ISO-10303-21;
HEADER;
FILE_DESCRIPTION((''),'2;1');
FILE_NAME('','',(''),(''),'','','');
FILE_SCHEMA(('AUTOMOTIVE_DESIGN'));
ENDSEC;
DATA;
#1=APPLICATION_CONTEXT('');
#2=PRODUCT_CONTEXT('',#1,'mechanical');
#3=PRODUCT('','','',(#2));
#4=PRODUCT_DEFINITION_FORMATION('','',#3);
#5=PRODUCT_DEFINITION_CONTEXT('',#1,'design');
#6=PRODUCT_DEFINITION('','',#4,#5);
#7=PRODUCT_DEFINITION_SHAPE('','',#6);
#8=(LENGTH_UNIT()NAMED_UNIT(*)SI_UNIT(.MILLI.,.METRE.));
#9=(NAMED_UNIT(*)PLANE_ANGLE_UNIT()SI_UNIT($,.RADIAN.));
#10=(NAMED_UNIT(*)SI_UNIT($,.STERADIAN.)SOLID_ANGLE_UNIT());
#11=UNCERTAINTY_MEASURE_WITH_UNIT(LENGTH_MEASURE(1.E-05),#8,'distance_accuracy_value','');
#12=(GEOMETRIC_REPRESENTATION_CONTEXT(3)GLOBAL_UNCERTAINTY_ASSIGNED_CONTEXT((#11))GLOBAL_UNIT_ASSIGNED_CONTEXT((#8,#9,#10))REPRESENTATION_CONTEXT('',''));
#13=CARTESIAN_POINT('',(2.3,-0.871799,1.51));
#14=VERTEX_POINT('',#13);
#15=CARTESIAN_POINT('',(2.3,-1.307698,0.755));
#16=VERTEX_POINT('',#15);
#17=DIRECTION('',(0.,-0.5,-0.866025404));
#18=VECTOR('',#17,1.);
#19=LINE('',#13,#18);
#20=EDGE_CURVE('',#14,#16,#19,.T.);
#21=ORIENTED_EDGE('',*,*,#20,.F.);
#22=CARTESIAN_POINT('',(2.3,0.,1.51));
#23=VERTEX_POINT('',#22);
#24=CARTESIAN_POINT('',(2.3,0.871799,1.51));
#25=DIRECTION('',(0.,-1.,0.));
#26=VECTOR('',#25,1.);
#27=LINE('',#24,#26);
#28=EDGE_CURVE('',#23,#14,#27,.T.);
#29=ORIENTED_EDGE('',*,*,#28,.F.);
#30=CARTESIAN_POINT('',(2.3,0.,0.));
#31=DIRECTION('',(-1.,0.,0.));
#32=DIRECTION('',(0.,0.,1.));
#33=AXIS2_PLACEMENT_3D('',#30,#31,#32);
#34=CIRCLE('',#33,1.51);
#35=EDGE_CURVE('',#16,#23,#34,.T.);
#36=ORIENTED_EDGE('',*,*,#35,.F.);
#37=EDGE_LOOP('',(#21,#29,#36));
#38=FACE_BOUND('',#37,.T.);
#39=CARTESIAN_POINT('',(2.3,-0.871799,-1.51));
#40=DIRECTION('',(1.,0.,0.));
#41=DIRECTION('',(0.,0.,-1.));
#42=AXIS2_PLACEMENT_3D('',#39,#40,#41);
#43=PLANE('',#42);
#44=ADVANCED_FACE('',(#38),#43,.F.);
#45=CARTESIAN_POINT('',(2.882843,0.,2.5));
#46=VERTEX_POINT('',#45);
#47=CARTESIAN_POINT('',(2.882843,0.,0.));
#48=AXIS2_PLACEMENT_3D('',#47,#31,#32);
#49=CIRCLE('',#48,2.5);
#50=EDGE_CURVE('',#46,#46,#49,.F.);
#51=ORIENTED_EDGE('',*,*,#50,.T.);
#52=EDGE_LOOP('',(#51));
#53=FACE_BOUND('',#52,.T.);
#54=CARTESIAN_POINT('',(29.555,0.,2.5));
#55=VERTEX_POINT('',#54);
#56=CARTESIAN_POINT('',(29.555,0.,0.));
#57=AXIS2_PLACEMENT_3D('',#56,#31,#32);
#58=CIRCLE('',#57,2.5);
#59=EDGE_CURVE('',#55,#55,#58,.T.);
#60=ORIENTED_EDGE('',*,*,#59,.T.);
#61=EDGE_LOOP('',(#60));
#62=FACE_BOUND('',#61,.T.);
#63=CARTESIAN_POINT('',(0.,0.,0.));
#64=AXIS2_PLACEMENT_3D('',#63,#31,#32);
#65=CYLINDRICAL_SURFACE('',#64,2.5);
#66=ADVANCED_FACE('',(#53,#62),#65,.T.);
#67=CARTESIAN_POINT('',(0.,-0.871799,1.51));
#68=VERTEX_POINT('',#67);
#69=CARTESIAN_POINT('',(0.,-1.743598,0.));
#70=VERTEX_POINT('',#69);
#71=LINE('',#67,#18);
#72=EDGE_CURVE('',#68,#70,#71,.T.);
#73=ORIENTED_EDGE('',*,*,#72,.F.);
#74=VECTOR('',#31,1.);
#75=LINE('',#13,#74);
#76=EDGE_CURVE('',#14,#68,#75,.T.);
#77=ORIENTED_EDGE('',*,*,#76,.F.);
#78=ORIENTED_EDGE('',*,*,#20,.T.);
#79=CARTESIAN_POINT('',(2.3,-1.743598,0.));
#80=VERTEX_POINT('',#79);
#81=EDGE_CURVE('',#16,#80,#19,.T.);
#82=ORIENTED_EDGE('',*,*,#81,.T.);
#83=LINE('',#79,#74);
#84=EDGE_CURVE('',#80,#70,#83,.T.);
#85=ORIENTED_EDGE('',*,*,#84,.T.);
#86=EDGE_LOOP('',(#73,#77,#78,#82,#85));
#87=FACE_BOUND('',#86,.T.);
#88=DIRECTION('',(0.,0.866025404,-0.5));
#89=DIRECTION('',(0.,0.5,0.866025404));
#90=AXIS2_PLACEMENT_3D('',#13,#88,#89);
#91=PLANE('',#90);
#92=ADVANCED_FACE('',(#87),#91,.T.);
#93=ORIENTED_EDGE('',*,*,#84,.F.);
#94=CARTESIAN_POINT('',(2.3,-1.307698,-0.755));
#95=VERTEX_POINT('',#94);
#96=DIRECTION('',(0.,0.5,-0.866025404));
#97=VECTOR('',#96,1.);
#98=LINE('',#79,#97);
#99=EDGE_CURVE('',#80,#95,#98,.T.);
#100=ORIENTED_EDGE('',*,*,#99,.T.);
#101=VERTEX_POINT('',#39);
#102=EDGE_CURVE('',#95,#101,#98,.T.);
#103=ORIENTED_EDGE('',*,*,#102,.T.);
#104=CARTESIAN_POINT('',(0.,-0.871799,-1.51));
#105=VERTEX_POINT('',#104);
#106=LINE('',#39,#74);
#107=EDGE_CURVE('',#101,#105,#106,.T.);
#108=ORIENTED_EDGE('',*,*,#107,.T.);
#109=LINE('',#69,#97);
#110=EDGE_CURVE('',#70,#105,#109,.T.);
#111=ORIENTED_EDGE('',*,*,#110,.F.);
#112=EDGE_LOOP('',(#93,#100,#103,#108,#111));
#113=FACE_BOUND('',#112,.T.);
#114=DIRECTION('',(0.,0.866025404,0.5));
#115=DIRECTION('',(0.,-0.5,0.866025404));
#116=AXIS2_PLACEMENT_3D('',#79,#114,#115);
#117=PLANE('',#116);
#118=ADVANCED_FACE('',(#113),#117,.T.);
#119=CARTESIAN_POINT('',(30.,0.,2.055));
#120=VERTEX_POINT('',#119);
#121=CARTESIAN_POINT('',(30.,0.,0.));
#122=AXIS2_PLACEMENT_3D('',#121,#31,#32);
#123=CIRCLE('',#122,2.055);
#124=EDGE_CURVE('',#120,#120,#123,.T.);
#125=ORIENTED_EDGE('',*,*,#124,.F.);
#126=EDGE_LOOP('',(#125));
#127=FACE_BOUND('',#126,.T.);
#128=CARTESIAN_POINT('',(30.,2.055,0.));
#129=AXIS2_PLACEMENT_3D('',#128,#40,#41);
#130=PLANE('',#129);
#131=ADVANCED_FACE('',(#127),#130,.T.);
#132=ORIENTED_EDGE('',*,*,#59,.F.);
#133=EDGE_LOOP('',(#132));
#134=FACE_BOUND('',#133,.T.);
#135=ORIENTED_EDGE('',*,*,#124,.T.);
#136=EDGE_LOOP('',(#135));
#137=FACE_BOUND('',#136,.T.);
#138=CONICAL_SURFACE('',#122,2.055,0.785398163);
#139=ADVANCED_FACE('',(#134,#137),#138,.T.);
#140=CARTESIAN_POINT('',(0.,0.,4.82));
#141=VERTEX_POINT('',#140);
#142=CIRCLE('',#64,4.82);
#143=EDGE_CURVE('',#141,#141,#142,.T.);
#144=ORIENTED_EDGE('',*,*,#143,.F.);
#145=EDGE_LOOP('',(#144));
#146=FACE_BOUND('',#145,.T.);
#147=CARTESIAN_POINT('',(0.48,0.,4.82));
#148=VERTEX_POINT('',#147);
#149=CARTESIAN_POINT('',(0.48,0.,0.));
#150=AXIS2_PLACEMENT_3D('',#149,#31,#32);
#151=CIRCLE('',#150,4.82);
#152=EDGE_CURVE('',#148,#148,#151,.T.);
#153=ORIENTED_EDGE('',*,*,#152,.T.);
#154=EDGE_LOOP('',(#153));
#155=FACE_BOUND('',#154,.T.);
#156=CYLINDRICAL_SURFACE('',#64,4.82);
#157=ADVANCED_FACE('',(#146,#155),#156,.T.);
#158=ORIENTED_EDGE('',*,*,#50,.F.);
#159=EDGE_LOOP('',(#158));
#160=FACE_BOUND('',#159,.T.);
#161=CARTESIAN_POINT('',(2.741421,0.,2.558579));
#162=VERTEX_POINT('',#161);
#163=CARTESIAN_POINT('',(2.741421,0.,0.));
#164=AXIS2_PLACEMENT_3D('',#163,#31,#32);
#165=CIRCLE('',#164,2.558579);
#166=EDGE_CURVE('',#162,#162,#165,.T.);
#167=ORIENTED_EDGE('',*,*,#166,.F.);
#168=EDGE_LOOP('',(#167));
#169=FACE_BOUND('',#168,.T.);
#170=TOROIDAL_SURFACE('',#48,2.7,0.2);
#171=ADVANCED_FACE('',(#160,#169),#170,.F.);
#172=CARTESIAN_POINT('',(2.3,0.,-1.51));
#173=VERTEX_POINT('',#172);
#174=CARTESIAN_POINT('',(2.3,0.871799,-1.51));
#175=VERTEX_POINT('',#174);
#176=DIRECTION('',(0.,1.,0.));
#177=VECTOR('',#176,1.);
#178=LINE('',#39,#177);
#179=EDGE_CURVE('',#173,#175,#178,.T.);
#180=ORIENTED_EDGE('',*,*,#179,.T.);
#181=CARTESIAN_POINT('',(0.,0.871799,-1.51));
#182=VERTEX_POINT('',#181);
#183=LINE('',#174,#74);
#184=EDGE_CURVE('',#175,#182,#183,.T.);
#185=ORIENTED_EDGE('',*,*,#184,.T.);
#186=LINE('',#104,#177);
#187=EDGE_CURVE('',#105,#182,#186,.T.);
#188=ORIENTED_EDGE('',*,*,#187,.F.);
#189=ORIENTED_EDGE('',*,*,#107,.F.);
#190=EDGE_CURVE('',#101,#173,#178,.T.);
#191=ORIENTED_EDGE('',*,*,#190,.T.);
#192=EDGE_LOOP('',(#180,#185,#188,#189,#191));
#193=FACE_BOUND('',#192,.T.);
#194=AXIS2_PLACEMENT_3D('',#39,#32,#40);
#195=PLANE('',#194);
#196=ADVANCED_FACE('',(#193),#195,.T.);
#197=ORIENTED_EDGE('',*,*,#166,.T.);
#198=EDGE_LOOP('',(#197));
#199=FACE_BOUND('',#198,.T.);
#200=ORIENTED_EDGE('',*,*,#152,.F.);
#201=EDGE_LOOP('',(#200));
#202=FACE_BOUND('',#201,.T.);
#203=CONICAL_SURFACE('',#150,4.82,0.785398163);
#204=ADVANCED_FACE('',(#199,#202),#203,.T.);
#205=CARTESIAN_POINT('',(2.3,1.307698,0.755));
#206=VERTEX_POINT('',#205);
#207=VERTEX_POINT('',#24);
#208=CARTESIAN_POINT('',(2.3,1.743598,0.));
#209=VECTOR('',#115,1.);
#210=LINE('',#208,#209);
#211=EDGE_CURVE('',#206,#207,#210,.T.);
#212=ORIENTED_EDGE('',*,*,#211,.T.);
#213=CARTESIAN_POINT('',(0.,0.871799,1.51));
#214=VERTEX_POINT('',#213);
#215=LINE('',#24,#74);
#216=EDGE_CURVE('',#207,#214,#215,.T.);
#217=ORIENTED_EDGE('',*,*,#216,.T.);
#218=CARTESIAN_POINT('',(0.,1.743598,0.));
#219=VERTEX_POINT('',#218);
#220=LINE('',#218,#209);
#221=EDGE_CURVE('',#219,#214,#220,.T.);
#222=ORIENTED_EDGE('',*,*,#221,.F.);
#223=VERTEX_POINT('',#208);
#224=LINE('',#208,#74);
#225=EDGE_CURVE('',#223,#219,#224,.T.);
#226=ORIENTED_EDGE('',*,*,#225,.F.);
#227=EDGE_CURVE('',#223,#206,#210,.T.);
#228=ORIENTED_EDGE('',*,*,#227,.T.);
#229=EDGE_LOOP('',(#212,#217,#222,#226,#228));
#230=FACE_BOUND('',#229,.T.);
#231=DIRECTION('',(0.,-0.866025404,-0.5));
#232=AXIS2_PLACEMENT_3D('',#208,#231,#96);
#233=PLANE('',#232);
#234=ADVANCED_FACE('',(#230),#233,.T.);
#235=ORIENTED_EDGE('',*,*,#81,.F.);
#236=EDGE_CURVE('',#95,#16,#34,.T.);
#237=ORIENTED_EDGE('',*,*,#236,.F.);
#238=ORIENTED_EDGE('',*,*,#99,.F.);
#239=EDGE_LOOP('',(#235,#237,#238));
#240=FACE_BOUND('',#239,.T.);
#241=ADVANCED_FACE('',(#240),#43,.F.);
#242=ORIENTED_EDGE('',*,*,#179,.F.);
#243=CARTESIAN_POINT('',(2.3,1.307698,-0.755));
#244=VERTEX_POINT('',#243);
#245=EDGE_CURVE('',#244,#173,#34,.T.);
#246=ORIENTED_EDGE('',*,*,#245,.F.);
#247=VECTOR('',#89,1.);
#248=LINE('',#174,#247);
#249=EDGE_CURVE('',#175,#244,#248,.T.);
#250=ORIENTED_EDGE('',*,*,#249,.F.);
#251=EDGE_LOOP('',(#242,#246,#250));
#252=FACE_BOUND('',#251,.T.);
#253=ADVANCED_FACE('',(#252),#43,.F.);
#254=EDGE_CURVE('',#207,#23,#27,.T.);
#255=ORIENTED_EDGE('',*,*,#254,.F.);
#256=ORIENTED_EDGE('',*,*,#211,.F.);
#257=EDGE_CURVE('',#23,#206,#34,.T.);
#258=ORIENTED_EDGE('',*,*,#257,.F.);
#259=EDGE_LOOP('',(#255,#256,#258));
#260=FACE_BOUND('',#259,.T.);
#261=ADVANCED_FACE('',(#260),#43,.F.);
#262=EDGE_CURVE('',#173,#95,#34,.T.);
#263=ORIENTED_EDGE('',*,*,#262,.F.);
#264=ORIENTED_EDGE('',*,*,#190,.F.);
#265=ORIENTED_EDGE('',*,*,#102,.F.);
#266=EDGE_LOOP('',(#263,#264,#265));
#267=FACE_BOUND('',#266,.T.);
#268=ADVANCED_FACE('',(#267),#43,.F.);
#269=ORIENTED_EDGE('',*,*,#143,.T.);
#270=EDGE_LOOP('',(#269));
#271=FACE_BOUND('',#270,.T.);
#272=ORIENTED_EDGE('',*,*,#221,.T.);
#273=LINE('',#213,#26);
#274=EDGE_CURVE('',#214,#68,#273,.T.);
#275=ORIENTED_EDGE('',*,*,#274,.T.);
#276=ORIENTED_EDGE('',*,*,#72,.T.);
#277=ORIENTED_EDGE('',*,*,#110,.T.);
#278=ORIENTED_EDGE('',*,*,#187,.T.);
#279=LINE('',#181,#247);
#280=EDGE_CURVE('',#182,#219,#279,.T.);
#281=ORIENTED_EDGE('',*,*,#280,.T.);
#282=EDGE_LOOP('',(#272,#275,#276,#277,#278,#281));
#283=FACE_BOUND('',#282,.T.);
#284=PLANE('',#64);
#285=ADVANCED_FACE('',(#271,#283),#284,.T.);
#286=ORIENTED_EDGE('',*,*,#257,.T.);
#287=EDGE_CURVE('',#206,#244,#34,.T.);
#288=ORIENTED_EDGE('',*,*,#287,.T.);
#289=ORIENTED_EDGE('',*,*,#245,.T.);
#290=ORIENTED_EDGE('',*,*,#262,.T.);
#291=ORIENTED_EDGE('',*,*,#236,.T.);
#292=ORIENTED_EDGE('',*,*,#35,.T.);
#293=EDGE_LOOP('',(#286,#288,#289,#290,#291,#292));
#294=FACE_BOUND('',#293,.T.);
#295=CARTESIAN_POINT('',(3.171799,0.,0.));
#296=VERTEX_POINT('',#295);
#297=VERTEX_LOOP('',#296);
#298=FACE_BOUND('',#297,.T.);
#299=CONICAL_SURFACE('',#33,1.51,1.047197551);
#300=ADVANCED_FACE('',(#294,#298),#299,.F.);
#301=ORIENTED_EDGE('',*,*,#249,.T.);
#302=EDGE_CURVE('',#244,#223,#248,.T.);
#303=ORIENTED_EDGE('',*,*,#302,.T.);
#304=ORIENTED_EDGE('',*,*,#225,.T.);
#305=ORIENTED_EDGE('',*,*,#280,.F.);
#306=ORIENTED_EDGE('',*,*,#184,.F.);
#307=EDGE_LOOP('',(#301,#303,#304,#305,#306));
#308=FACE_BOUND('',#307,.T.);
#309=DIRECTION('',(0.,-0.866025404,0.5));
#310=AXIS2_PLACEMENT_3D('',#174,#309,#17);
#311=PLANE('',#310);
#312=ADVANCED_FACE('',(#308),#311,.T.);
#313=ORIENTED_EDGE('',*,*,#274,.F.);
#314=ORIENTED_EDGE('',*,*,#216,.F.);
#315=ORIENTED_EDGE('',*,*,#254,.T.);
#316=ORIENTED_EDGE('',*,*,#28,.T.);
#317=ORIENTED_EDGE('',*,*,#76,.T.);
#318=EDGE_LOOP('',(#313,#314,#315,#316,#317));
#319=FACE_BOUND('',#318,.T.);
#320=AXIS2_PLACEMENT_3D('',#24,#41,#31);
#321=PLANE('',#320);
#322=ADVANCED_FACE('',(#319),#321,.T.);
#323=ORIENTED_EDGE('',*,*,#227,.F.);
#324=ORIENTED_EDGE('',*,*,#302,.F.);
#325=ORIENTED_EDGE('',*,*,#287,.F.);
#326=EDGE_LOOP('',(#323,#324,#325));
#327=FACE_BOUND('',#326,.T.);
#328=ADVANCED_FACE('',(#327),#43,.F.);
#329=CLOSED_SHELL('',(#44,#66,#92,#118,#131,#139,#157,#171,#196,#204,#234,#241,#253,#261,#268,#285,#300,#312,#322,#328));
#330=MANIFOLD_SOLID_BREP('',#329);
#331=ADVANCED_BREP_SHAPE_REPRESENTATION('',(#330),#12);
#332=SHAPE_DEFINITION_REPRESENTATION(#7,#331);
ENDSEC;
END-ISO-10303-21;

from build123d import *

# Parameters (mm, degrees)
FILLET1_R   = 0.2
HEX_START   = -2.3
HEX_2_DEPTH = 2.3


with BuildPart() as part:
    # BodySke → BaseBody (revolve)
    with BuildSketch(Plane.XY, mode=Mode.PRIVATE) as basebody_sk:
        Polygon((0, 0), (0, 4.82), (0.48, 4.82), (2.8, 2.5), (29.555, 2.5), (30, 2.055), (30, 0), align=None)
    revolve(basebody_sk.sketch.rotate(Axis((0, 0, 0), (1, 0, 0)), 90), axis=Axis((0, 0, 0), (1, 0, 0)))

    # Fillet1
    fillet1_edges = [part.edges().sort_by_distance(p)[0] for p in [
        (2.8, 0, -2.5),
    ]]
    fillet(fillet1_edges, radius=FILLET1_R)

    # Hex 2: read off the stored shape, not the designer's step
    # Hex 2 outline → Hex 2 (cut)
    with BuildSketch(Plane.ZY.offset(HEX_START)):
        Polygon((-1.51, -0.871798906), (0, -1.743597813), (1.51, -0.871798906), (1.51, 0.871798906), (0, 1.743597813), (-1.51, 0.871798906), align=None)
    extrude(amount=HEX_2_DEPTH, mode=Mode.SUBTRACT)

    # Hex 2 2 outline → Hex 2 2 (revolve, cut)
    with BuildSketch(Plane.YX):
        Polygon((1.51, 2.3), (0, 3.171798906), (0, 2.3), align=None)
    revolve(axis=Axis((0, 0, 0), (1, 0, 0)), mode=Mode.SUBTRACT)


solid = part.part
